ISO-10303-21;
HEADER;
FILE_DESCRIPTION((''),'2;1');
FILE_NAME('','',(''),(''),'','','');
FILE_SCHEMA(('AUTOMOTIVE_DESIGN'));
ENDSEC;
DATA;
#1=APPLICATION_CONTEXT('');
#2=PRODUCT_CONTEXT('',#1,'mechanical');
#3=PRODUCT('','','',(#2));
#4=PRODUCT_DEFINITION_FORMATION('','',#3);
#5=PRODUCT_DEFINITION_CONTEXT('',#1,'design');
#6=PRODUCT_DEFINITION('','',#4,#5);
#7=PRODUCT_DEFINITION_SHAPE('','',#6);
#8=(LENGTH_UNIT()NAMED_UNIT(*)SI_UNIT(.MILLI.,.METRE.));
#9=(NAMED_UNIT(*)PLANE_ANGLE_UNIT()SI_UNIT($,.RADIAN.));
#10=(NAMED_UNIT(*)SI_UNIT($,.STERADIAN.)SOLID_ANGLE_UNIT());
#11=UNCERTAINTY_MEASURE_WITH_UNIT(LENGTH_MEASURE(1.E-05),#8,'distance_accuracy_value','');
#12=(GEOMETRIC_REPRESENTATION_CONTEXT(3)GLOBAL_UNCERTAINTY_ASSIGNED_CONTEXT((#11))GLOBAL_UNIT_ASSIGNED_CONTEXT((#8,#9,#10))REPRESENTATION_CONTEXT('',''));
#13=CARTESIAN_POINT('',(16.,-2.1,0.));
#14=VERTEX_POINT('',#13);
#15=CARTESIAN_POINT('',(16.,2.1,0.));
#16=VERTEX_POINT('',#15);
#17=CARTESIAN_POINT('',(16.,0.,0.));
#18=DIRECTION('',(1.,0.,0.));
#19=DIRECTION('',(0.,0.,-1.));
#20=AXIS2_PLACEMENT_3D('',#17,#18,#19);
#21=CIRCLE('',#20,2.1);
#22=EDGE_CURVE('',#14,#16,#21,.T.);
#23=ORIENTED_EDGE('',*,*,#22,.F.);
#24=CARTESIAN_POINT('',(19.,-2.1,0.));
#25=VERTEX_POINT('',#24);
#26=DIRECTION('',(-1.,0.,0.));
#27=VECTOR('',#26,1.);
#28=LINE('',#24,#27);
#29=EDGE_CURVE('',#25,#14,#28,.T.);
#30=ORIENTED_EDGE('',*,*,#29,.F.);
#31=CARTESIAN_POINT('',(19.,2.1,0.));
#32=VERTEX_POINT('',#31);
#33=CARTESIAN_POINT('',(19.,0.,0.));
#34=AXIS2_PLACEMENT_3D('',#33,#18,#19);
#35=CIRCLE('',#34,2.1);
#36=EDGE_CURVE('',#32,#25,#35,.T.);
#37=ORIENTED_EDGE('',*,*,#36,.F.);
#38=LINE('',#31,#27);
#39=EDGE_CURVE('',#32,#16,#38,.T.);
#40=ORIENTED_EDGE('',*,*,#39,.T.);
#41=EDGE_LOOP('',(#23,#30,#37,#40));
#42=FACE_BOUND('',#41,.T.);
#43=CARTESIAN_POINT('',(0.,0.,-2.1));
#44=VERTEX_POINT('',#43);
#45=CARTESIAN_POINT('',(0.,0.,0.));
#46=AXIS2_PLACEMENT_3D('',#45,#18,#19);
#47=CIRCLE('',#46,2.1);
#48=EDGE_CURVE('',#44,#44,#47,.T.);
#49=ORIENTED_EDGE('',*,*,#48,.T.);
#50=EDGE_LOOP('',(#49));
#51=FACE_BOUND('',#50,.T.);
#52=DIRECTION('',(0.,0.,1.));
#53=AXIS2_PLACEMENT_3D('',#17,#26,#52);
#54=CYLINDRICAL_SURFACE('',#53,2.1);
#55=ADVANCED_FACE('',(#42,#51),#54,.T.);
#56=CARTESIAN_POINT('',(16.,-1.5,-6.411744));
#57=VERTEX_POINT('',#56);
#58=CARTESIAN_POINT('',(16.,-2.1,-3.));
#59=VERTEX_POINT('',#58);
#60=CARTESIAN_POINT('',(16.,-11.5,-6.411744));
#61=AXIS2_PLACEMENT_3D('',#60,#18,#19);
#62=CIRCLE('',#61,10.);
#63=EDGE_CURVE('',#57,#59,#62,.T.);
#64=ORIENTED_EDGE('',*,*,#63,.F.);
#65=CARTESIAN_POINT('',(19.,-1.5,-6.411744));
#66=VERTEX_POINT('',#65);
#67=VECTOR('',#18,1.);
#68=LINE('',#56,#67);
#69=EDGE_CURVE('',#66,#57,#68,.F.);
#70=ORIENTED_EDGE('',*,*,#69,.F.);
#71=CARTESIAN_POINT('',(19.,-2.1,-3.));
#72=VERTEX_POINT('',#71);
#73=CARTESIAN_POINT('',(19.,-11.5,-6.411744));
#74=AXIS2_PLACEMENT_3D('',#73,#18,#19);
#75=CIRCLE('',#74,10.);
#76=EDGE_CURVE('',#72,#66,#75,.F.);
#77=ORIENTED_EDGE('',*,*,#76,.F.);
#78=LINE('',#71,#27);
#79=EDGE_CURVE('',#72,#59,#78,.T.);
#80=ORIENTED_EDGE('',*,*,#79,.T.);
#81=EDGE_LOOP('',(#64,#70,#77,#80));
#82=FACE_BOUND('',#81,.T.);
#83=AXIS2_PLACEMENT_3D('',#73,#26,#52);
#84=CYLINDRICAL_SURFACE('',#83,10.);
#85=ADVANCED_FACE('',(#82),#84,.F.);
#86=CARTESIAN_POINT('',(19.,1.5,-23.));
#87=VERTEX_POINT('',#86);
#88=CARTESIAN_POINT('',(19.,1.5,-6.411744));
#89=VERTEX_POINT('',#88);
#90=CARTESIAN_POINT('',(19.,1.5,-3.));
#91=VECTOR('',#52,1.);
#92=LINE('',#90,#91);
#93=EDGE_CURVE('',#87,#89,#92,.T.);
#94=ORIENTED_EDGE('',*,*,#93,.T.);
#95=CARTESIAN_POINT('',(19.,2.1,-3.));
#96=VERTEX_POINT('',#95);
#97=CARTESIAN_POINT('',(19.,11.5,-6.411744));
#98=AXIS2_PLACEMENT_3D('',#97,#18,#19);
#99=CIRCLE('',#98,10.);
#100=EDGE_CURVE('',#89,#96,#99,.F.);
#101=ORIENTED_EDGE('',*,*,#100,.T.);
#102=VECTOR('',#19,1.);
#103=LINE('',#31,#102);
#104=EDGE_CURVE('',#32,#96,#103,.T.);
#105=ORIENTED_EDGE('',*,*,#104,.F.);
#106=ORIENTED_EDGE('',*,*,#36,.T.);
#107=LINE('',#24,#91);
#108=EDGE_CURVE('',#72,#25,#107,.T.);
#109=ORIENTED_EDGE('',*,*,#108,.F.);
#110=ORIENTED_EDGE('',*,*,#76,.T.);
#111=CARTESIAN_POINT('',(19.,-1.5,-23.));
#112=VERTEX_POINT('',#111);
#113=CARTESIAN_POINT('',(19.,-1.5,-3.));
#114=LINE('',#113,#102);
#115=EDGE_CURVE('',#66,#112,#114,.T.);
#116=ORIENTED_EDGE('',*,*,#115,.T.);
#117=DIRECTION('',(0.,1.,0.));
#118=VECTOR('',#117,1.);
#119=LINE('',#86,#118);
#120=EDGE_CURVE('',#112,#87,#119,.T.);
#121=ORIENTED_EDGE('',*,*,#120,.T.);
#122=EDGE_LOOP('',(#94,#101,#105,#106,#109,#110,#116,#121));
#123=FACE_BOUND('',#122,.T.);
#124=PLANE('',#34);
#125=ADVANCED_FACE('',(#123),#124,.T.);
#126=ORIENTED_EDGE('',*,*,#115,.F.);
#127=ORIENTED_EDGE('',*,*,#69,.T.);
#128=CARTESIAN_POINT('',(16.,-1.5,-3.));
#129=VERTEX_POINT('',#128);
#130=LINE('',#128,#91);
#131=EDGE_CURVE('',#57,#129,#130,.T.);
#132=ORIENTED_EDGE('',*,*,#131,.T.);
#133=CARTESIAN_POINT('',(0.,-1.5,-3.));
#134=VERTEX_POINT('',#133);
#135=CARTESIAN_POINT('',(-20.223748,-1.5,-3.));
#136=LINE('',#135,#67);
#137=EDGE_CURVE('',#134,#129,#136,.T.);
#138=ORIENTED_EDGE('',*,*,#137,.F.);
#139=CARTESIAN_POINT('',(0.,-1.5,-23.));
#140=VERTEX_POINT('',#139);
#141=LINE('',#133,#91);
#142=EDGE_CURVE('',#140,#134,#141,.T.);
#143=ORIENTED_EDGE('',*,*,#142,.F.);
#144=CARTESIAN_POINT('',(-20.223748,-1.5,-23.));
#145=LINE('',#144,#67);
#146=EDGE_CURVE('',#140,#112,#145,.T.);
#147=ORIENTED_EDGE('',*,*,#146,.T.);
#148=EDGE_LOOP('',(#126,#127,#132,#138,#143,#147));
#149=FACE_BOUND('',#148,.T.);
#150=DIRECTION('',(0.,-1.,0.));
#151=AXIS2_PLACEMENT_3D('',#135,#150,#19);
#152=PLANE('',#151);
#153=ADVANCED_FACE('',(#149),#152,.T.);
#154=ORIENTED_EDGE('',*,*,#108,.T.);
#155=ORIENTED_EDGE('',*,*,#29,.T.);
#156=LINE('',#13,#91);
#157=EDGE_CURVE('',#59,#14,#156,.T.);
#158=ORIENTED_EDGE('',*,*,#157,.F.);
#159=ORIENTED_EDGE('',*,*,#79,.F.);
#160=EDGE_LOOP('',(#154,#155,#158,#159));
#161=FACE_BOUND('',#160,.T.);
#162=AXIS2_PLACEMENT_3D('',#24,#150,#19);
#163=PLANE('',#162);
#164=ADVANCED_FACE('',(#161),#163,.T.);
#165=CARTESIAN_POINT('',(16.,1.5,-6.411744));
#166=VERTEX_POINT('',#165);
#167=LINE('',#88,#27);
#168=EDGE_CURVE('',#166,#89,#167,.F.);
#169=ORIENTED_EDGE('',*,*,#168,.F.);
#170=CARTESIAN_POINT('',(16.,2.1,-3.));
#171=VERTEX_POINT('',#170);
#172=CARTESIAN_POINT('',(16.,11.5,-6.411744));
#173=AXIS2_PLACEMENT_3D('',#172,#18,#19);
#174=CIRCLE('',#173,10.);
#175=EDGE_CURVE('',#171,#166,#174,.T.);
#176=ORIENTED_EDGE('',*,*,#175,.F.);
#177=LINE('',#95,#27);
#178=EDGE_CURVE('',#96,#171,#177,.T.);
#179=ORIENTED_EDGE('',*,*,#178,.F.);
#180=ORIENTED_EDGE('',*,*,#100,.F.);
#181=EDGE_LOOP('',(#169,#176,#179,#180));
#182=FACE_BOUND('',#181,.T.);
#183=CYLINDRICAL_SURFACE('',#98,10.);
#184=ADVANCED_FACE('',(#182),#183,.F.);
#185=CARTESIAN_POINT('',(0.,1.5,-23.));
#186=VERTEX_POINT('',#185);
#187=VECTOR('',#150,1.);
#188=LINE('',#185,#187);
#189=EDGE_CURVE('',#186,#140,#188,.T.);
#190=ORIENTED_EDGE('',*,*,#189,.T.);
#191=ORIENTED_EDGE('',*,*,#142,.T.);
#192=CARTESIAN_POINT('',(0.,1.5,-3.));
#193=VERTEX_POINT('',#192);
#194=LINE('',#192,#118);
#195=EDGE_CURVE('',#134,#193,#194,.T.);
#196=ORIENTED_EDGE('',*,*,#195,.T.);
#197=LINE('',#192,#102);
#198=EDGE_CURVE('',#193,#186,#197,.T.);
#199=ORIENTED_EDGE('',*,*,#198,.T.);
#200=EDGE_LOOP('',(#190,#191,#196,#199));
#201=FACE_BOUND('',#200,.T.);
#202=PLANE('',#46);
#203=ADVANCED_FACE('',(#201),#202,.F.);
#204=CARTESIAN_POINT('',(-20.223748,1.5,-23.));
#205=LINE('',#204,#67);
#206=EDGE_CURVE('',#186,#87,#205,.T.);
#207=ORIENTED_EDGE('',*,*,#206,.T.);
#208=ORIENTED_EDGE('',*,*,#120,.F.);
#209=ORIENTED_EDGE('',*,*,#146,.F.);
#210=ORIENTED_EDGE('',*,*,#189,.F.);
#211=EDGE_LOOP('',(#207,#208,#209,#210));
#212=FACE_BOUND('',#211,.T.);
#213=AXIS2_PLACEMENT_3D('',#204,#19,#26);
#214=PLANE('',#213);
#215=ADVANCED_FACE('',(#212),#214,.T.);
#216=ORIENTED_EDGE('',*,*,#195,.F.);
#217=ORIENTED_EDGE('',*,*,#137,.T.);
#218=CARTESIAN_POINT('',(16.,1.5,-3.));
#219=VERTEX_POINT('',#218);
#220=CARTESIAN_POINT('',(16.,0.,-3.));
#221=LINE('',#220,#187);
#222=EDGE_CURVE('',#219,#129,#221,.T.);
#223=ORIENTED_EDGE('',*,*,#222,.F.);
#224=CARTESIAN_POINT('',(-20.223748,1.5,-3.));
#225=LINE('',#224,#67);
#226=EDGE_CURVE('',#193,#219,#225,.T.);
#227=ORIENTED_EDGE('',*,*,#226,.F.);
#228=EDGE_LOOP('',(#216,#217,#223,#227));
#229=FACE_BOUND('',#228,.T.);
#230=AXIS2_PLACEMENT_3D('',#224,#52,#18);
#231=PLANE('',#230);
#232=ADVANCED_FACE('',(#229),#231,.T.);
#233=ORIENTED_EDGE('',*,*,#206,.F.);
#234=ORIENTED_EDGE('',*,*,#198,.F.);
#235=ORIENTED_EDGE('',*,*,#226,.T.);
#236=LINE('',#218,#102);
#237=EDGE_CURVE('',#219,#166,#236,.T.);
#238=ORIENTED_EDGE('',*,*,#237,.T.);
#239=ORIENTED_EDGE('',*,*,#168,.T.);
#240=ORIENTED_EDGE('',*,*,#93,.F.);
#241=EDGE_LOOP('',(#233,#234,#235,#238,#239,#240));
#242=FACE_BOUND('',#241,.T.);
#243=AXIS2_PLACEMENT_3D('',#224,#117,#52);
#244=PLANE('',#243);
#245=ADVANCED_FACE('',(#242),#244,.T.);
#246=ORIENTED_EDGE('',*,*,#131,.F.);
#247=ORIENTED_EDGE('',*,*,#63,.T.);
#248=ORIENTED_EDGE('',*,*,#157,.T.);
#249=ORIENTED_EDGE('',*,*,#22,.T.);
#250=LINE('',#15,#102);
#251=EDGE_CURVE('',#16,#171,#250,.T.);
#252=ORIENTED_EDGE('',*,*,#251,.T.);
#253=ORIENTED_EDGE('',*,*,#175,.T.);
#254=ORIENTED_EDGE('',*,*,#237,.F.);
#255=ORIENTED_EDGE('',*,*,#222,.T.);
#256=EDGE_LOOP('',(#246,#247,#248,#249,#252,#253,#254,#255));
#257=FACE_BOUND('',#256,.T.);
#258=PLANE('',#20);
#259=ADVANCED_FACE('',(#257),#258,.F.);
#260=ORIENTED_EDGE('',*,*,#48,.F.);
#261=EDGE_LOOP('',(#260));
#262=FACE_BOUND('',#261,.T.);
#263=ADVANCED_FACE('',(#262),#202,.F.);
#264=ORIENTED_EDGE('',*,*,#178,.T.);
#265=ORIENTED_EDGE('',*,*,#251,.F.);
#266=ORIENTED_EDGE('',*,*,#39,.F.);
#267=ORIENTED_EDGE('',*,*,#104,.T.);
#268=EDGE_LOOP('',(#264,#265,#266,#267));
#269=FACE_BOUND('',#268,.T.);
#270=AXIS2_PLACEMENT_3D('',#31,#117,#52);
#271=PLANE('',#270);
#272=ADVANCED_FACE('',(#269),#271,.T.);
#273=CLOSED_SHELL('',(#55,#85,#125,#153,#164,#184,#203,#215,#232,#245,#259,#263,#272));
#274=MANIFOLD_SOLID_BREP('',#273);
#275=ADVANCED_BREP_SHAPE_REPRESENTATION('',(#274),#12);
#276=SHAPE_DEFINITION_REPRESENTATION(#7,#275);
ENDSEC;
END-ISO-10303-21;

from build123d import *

# Parameters (mm, degrees)
SKETCH2_R           = 2.1
BOSS_EXTRUDE1_DEPTH = 16
SKETCH3_R           = 2.1
BOSS_EXTRUDE2_DEPTH = 3
BOSS_EXTRUDE3_REACH = 21.35
SKETCH4_W           = 20
SKETCH4_H           = 3
FILLET1_R           = 10


with BuildPart() as part:
    # Sketch2 → Boss-Extrude1 (new body)
    with BuildSketch(Plane(origin=(0, 0, 0), x_dir=(0, 0, -1), z_dir=(1, 0, 0))):
        Circle(SKETCH2_R)
    extrude(amount=BOSS_EXTRUDE1_DEPTH)

    # Sketch3 → Boss-Extrude2 (add)
    with BuildSketch(Plane(origin=(16, 0, 0), x_dir=(0, 0, -1), z_dir=(1, 0, 0))):
        with Locations(Location((0, 0, 0), (0, 0, 270))):
            Circle(SKETCH3_R)
        with BuildLine():
            Line((3, 2.1), (0, 2.1))
            ThreePointArc((0, 2.1), (1.48492424, 1.48492424), (2.1, 0))
            ThreePointArc((2.1, 0), (1.48492424, -1.48492424), (0, -2.1))
            Line((0, -2.1), (3, -2.1))
            Line((3, -2.1), (3, 2.1))
        make_face()
    extrude(amount=BOSS_EXTRUDE2_DEPTH)

    # Boss-Extrude3: up to this face of the body (flat: up to its plane)
    boss_extrude3_end = Plane(part.part.faces().sort_by_distance((0, 0, 0))[0])
    # Sketch4 → Boss-Extrude3 (add, up to the picked face)
    with BuildSketch(Plane(origin=(19, 0, 0), x_dir=(0, 0, -1), z_dir=(1, 0, 0)), mode=Mode.PRIVATE) as boss_extrude3_sk1:
        with Locations((13, 0)):
            Rectangle(SKETCH4_W, SKETCH4_H)
    boss_extrude3_tool1 = split(extrude(boss_extrude3_sk1.sketch, amount=-BOSS_EXTRUDE3_REACH, mode=Mode.PRIVATE), bisect_by=boss_extrude3_end, keep=Keep.BOTH, mode=Mode.PRIVATE)
    add(boss_extrude3_tool1.solids().sort_by(Axis((19, 0, -13), (-1, 0, 0)))[0])

    # Fillet1
    # the kernel refuses this fillet: 10 mm, written as the material it adds along each edge
    with BuildSketch(Plane(origin=(19, -1.5, -3), x_dir=(0, -1, 0), z_dir=(-1, 0, 0))) as fillet1_piece_1:
        with BuildLine():
            CenterArc((10, -3.411744422), FILLET1_R, 160.051556411, 19.948443589)
            Line((0, -3.411744422), (0, 0))
            Line((0, 0), (0.6, 0))
        make_face()
    extrude(amount=3)
    with BuildSketch(Plane(origin=(19, 1.5, -3), x_dir=(0, 1, 0), z_dir=(-1, 0, 0))) as fillet1_piece_2:
        with BuildLine():
            CenterArc((10, 3.411744422), FILLET1_R, 180, 19.948443589)
            Line((0, 3.411744422), (0, 0))
            Line((0, 0), (0.6, 0))
        make_face()
    extrude(amount=3)


solid = part.part
